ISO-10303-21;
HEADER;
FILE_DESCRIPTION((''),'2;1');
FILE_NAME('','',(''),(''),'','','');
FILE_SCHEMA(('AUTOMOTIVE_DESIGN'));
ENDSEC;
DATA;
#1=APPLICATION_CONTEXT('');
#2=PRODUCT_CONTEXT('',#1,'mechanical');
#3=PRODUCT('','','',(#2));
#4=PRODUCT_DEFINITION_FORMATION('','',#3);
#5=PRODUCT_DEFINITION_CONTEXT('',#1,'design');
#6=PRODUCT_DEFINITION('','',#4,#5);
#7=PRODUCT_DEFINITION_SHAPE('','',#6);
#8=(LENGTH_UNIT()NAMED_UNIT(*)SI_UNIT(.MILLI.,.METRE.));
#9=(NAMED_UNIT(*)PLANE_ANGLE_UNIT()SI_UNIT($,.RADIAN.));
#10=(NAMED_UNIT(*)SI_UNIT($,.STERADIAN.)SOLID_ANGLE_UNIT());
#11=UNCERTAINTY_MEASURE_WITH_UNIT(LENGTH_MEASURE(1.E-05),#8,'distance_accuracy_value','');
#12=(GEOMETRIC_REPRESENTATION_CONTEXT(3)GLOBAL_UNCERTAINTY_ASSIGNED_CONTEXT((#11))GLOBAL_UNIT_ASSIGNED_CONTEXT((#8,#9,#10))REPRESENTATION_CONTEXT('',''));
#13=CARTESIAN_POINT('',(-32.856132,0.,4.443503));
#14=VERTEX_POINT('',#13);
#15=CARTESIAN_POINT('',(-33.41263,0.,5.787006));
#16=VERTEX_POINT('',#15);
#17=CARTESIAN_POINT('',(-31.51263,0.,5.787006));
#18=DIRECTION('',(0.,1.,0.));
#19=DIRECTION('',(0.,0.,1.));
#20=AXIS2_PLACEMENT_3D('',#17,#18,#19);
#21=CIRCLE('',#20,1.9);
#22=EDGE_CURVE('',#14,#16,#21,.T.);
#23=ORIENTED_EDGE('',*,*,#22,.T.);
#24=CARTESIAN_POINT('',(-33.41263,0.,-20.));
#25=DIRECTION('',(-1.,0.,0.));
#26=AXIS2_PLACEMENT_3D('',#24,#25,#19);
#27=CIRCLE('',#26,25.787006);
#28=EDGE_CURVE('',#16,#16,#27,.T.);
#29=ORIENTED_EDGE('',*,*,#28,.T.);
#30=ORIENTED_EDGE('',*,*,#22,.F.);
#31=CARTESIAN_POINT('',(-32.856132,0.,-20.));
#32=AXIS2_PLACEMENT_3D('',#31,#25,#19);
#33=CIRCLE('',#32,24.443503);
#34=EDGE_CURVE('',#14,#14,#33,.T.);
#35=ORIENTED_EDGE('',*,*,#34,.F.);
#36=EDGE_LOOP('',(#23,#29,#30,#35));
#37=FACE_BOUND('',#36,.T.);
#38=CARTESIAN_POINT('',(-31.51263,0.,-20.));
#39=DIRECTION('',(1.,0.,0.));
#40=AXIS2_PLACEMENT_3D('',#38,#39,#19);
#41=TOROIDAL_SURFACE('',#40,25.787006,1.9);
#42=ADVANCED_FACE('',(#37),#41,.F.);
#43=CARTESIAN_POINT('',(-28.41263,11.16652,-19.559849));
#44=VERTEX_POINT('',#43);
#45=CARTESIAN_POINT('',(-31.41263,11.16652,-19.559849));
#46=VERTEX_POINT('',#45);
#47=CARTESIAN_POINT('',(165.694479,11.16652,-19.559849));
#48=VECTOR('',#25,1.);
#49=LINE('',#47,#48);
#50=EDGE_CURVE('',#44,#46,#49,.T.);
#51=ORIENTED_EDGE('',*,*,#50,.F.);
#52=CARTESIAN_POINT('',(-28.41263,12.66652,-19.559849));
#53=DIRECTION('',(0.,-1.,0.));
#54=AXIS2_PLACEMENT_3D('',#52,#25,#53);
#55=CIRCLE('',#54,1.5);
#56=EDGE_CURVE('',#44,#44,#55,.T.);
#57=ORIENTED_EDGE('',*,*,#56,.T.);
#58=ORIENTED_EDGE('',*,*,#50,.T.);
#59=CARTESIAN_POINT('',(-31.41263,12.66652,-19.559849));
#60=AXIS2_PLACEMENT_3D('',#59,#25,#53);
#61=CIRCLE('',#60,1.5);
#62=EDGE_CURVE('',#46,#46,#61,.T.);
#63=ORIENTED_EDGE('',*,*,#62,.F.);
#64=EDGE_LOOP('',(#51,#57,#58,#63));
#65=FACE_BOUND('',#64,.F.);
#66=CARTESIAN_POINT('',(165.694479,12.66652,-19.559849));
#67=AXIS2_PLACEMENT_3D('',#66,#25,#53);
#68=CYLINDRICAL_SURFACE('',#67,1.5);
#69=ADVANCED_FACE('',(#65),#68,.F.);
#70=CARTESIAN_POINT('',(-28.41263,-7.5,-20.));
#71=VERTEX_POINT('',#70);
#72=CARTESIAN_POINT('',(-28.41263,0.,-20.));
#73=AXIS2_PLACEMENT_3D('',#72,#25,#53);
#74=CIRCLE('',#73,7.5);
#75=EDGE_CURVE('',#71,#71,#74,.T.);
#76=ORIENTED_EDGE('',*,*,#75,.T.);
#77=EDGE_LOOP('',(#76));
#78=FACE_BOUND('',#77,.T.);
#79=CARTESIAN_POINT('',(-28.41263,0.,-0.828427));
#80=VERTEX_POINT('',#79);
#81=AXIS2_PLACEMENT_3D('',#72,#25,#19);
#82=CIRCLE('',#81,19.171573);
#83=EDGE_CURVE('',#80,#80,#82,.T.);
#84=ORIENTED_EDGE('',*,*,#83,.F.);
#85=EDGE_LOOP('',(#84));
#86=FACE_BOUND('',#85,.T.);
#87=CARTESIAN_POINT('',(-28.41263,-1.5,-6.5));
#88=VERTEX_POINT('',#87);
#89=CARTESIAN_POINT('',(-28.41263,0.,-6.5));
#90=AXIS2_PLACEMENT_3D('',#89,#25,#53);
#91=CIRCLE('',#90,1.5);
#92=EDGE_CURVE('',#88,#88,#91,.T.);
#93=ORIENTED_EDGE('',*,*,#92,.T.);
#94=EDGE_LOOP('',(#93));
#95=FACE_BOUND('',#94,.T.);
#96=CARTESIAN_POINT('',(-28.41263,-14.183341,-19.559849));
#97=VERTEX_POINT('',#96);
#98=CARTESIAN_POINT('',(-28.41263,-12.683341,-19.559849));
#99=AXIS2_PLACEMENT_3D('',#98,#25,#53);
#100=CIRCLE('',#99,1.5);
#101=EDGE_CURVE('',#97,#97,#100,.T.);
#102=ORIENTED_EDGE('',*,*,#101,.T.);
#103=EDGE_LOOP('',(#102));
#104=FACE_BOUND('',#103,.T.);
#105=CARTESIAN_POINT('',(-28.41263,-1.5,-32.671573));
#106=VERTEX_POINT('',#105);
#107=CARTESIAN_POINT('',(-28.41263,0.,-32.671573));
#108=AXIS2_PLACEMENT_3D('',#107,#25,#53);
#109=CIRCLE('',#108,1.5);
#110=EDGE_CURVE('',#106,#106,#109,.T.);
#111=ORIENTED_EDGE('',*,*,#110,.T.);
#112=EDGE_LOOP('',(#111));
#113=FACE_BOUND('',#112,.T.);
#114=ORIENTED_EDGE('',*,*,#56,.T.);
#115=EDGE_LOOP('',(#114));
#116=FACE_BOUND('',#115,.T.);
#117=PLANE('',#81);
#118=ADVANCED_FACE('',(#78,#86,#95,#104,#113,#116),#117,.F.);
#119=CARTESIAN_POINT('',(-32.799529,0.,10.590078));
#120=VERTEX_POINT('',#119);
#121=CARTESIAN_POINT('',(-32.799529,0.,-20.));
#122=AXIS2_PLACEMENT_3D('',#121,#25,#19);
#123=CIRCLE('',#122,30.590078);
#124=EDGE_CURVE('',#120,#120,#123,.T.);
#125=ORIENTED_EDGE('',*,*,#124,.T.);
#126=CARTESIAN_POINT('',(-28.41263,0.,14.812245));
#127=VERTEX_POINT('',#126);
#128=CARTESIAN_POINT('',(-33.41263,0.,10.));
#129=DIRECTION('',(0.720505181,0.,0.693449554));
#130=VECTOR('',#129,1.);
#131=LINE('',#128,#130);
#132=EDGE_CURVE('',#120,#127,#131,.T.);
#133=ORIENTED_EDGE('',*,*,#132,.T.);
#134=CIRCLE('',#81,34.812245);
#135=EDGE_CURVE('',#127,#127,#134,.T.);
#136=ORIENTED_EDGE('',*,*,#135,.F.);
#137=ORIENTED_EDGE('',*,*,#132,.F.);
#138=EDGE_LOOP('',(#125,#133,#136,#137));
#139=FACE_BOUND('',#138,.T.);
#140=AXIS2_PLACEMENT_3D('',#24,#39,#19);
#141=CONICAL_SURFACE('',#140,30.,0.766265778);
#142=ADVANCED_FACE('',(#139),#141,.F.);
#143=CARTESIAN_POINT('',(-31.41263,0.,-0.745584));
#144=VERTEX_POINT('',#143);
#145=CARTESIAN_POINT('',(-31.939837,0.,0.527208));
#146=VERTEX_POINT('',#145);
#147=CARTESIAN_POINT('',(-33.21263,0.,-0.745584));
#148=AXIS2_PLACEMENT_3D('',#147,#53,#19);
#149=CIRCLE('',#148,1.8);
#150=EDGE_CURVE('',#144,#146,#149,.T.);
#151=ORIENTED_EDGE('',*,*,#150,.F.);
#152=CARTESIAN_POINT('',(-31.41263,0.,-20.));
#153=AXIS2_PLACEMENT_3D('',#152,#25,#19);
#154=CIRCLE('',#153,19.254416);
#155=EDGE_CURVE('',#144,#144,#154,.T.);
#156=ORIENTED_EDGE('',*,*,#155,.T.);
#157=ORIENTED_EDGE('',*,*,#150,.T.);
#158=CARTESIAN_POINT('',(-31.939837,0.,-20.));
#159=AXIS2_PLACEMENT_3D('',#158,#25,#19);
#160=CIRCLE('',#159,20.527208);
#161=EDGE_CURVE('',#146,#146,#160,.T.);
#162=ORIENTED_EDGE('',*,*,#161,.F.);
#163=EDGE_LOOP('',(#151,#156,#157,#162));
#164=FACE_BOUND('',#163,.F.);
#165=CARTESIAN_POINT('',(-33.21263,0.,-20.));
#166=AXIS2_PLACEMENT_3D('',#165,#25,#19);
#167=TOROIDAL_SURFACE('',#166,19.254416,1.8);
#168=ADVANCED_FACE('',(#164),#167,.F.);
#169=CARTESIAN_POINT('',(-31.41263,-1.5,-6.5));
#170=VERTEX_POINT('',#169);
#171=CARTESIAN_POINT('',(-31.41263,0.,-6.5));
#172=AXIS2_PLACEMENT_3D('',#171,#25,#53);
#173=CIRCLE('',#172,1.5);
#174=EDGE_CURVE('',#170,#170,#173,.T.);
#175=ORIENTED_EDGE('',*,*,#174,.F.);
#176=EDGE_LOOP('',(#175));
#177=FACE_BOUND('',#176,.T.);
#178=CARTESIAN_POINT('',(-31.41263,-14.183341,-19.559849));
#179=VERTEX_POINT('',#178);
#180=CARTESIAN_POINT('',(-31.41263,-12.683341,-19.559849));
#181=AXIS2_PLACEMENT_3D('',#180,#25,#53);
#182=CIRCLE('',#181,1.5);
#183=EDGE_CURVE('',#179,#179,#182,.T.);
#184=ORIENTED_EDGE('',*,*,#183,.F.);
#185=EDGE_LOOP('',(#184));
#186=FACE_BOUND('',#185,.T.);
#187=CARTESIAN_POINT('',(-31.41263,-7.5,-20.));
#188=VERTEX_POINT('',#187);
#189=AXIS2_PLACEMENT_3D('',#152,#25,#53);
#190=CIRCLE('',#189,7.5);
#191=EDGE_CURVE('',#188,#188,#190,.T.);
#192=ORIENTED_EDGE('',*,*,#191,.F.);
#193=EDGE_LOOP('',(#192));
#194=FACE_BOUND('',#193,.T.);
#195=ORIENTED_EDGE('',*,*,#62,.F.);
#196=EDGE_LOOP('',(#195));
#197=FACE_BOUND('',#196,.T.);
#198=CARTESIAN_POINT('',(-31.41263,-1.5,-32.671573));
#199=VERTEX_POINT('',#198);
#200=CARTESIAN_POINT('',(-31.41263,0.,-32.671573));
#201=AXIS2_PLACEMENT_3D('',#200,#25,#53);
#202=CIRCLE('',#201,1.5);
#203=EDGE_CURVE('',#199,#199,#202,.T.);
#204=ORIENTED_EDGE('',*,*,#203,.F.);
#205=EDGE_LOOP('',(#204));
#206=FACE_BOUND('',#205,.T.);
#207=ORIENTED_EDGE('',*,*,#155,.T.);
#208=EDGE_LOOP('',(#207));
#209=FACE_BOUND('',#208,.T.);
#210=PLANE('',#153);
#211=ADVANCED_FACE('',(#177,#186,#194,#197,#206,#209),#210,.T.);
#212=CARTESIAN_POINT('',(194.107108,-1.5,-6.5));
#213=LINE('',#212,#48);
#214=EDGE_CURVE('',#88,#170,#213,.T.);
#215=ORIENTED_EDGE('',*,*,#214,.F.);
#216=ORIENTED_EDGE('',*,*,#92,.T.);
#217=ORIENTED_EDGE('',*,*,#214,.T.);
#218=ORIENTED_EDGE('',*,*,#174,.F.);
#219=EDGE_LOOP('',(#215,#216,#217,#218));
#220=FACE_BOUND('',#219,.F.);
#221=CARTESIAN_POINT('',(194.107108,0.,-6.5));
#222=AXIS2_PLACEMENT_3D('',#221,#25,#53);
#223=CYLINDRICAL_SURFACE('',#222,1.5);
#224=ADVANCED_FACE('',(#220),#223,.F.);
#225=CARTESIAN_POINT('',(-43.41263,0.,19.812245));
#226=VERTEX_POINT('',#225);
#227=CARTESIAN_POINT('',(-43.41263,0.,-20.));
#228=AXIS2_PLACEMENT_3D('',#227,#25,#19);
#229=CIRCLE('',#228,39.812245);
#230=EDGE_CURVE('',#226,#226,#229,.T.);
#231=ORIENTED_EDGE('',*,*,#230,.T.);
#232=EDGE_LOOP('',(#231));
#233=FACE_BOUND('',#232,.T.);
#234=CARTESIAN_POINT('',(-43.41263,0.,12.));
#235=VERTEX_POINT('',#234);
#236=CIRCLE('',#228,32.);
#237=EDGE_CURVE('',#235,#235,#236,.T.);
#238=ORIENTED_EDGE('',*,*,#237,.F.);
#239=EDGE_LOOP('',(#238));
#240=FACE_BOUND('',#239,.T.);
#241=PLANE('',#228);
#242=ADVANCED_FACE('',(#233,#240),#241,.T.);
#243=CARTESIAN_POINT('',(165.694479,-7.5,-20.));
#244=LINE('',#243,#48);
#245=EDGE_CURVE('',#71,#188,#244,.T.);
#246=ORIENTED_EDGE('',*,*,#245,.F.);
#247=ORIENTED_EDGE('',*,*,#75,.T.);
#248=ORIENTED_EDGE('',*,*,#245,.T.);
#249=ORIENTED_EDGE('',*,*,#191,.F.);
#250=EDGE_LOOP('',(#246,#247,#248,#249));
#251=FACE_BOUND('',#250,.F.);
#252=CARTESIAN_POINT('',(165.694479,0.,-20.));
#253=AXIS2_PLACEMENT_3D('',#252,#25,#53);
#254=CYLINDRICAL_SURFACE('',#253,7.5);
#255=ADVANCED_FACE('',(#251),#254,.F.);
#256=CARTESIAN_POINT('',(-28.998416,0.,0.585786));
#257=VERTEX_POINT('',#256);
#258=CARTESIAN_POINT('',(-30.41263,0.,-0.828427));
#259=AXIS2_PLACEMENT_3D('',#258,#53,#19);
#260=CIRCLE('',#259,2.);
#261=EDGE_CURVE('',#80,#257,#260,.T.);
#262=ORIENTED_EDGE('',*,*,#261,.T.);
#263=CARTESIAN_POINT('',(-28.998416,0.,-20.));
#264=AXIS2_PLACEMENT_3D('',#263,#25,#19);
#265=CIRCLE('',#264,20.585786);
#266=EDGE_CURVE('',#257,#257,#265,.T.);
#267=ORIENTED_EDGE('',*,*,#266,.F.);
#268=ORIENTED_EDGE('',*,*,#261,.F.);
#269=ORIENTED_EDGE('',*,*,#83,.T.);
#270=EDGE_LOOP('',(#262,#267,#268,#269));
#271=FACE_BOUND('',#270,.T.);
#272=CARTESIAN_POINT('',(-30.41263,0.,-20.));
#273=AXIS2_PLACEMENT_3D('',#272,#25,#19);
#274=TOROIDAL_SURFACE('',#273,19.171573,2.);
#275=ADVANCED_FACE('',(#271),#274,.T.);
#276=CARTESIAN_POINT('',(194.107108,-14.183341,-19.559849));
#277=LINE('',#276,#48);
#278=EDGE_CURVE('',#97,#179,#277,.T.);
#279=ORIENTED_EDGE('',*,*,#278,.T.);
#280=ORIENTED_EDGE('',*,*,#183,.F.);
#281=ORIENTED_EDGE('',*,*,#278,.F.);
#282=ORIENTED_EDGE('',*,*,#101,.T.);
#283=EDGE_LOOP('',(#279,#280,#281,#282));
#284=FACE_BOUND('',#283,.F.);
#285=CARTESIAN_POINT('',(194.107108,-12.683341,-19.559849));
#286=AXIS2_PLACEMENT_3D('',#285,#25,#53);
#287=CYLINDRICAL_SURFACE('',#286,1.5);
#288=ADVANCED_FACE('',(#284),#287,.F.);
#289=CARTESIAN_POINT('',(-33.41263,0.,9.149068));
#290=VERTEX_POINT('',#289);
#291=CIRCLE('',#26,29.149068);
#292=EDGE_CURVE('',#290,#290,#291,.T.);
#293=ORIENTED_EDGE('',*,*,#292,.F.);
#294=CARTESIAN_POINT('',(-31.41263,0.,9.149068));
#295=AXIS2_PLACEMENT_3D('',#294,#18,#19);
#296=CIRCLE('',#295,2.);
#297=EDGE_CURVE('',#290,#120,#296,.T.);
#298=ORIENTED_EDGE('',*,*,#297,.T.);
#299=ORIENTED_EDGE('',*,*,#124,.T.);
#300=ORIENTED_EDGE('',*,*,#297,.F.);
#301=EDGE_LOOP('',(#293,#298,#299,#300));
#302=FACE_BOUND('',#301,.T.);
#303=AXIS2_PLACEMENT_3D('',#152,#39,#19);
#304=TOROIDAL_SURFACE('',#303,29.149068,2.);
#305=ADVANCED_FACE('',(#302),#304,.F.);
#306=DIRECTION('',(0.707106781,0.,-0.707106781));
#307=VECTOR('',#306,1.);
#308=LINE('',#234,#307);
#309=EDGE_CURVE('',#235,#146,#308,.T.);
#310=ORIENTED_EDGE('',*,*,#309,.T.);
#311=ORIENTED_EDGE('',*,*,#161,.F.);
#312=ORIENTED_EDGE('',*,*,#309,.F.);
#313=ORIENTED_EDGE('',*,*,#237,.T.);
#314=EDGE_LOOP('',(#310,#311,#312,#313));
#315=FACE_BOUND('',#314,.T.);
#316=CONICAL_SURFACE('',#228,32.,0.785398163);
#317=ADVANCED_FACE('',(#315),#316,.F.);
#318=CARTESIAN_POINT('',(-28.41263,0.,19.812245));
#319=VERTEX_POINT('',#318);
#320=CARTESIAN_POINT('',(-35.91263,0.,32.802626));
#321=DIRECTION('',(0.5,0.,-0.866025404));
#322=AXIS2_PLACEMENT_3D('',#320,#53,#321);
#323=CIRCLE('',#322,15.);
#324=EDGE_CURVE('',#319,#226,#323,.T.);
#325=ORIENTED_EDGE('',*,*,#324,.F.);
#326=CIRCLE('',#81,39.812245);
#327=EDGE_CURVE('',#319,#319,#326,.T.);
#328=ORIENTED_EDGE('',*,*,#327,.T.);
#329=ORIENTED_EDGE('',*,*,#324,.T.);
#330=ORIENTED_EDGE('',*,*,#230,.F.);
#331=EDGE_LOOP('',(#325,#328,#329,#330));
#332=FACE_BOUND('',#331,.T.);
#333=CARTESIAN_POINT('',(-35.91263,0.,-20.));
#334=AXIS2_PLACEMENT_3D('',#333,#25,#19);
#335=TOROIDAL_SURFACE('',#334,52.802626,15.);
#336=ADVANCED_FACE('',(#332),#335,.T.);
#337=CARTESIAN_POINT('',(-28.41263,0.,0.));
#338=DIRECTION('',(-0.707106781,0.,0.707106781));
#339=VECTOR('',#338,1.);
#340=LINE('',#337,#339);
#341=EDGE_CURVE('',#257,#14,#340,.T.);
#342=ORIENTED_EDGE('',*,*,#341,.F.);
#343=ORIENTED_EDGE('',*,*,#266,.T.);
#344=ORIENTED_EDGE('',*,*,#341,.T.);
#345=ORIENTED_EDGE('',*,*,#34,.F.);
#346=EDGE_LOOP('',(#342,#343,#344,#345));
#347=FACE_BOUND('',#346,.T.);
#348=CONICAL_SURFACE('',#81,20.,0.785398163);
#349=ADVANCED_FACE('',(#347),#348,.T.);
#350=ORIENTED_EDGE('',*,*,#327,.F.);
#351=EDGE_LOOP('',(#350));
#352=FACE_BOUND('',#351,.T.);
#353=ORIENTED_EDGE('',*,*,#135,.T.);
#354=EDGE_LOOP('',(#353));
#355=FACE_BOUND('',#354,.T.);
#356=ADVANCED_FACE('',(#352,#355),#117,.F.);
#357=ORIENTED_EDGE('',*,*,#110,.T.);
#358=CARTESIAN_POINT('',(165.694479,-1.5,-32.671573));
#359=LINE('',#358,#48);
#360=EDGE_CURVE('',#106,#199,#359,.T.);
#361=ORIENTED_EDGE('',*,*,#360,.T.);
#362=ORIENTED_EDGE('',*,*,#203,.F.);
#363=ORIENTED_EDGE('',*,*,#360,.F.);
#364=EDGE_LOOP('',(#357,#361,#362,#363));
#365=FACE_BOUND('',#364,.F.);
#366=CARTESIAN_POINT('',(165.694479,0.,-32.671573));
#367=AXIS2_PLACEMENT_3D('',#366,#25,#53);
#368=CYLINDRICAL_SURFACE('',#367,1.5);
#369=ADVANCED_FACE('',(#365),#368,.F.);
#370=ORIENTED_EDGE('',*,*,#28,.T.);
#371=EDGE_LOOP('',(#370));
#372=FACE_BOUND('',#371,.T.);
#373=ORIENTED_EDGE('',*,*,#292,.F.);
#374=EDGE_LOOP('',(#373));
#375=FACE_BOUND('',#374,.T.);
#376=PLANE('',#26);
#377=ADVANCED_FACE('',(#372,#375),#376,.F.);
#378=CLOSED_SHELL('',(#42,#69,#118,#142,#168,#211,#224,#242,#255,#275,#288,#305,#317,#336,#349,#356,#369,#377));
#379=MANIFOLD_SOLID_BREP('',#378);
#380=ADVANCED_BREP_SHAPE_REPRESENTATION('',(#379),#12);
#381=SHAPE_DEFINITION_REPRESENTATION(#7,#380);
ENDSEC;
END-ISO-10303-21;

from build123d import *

# Parameters (mm, degrees)
F2_R  = 2
F4_R  = 1.9
F5_D  = 15
F7_D  = 3
F9_D  = 3
F11_D = 3
F12_R = 1.8


# Not quite as in the source:
# - a feature names something its author has since deleted; it is built from what else it names


with BuildPart() as f1:
    # F0 (on Front) → F1 (revolve)
    with BuildSketch(Plane.XZ):
        with BuildLine():
            Line((-28.4126295149, 14.8122454338), (-28.4126295149, 19.8122454338))
            ThreePointArc((-28.4126295149, 19.8122454338), (-35.9126295149, 47.8026264906), (-43.4126295149, 19.8122454338))
            Line((-43.4126295149, 19.8122454338), (-43.4126295149, 12))
            Line((-43.4126295149, 12), (-31.4126295149, 0))
            Line((-31.4126295149, 0), (-31.4126295149, -1.8659040798))
            Line((-31.4126295149, -1.8659040798), (-31.4126295149, -20))
            Line((-31.4126295149, -20), (-28.4126295149, -20))
            Line((-28.4126295149, -20), (-28.4126295149, 0))
            Line((-28.4126295149, 0), (-33.4126295149, 5))
            Line((-33.4126295149, 5), (-33.4126295149, 10))
            Line((-33.4126295149, 10), (-28.4126295149, 14.8122454338))
        make_face()
    revolve(axis=Axis((-29.9126295149, 0, -20), (-1, 0, 0)))

    # F2
    f2_edges = [f1.edges().sort_by_distance(p)[0] for p in [
        (-33.41263, 0, -50),
        (-28.41263, 0, -40),
    ]]
    fillet(f2_edges, radius=F2_R)

    # F4
    f4_edges = [f1.edges().sort_by_distance(p)[0] for p in [
        (-33.41263, 0, -45),
    ]]
    fillet(f4_edges, radius=F4_R)

    # F5 (through all)
    with Locations(Plane.YZ.offset(-28.4126295149)):
        with Locations((0, -20)):
            Hole(F5_D / 2)

    # F7 (through all)
    with Locations(Plane.YZ):
        with Locations((0, -6.5), (-12.6833414137, -19.5598490536)):
            Hole(F7_D / 2)

    # F9 (through all)
    with Locations(Plane.YZ.offset(-28.4126295149)):
        with Locations((0, -32.6715728753)):
            Hole(F9_D / 2)

    # F11 (through all)
    with Locations(Plane.YZ.offset(-28.4126295149)):
        with Locations((12.666519602, -19.5598490536)):
            Hole(F11_D / 2)

    # F12
    f12_edges = [f1.edges().sort_by_distance(p)[0] for p in [
        (-31.41263, 0, -40),
    ]]
    fillet(f12_edges, radius=F12_R)


solid = f1.part
